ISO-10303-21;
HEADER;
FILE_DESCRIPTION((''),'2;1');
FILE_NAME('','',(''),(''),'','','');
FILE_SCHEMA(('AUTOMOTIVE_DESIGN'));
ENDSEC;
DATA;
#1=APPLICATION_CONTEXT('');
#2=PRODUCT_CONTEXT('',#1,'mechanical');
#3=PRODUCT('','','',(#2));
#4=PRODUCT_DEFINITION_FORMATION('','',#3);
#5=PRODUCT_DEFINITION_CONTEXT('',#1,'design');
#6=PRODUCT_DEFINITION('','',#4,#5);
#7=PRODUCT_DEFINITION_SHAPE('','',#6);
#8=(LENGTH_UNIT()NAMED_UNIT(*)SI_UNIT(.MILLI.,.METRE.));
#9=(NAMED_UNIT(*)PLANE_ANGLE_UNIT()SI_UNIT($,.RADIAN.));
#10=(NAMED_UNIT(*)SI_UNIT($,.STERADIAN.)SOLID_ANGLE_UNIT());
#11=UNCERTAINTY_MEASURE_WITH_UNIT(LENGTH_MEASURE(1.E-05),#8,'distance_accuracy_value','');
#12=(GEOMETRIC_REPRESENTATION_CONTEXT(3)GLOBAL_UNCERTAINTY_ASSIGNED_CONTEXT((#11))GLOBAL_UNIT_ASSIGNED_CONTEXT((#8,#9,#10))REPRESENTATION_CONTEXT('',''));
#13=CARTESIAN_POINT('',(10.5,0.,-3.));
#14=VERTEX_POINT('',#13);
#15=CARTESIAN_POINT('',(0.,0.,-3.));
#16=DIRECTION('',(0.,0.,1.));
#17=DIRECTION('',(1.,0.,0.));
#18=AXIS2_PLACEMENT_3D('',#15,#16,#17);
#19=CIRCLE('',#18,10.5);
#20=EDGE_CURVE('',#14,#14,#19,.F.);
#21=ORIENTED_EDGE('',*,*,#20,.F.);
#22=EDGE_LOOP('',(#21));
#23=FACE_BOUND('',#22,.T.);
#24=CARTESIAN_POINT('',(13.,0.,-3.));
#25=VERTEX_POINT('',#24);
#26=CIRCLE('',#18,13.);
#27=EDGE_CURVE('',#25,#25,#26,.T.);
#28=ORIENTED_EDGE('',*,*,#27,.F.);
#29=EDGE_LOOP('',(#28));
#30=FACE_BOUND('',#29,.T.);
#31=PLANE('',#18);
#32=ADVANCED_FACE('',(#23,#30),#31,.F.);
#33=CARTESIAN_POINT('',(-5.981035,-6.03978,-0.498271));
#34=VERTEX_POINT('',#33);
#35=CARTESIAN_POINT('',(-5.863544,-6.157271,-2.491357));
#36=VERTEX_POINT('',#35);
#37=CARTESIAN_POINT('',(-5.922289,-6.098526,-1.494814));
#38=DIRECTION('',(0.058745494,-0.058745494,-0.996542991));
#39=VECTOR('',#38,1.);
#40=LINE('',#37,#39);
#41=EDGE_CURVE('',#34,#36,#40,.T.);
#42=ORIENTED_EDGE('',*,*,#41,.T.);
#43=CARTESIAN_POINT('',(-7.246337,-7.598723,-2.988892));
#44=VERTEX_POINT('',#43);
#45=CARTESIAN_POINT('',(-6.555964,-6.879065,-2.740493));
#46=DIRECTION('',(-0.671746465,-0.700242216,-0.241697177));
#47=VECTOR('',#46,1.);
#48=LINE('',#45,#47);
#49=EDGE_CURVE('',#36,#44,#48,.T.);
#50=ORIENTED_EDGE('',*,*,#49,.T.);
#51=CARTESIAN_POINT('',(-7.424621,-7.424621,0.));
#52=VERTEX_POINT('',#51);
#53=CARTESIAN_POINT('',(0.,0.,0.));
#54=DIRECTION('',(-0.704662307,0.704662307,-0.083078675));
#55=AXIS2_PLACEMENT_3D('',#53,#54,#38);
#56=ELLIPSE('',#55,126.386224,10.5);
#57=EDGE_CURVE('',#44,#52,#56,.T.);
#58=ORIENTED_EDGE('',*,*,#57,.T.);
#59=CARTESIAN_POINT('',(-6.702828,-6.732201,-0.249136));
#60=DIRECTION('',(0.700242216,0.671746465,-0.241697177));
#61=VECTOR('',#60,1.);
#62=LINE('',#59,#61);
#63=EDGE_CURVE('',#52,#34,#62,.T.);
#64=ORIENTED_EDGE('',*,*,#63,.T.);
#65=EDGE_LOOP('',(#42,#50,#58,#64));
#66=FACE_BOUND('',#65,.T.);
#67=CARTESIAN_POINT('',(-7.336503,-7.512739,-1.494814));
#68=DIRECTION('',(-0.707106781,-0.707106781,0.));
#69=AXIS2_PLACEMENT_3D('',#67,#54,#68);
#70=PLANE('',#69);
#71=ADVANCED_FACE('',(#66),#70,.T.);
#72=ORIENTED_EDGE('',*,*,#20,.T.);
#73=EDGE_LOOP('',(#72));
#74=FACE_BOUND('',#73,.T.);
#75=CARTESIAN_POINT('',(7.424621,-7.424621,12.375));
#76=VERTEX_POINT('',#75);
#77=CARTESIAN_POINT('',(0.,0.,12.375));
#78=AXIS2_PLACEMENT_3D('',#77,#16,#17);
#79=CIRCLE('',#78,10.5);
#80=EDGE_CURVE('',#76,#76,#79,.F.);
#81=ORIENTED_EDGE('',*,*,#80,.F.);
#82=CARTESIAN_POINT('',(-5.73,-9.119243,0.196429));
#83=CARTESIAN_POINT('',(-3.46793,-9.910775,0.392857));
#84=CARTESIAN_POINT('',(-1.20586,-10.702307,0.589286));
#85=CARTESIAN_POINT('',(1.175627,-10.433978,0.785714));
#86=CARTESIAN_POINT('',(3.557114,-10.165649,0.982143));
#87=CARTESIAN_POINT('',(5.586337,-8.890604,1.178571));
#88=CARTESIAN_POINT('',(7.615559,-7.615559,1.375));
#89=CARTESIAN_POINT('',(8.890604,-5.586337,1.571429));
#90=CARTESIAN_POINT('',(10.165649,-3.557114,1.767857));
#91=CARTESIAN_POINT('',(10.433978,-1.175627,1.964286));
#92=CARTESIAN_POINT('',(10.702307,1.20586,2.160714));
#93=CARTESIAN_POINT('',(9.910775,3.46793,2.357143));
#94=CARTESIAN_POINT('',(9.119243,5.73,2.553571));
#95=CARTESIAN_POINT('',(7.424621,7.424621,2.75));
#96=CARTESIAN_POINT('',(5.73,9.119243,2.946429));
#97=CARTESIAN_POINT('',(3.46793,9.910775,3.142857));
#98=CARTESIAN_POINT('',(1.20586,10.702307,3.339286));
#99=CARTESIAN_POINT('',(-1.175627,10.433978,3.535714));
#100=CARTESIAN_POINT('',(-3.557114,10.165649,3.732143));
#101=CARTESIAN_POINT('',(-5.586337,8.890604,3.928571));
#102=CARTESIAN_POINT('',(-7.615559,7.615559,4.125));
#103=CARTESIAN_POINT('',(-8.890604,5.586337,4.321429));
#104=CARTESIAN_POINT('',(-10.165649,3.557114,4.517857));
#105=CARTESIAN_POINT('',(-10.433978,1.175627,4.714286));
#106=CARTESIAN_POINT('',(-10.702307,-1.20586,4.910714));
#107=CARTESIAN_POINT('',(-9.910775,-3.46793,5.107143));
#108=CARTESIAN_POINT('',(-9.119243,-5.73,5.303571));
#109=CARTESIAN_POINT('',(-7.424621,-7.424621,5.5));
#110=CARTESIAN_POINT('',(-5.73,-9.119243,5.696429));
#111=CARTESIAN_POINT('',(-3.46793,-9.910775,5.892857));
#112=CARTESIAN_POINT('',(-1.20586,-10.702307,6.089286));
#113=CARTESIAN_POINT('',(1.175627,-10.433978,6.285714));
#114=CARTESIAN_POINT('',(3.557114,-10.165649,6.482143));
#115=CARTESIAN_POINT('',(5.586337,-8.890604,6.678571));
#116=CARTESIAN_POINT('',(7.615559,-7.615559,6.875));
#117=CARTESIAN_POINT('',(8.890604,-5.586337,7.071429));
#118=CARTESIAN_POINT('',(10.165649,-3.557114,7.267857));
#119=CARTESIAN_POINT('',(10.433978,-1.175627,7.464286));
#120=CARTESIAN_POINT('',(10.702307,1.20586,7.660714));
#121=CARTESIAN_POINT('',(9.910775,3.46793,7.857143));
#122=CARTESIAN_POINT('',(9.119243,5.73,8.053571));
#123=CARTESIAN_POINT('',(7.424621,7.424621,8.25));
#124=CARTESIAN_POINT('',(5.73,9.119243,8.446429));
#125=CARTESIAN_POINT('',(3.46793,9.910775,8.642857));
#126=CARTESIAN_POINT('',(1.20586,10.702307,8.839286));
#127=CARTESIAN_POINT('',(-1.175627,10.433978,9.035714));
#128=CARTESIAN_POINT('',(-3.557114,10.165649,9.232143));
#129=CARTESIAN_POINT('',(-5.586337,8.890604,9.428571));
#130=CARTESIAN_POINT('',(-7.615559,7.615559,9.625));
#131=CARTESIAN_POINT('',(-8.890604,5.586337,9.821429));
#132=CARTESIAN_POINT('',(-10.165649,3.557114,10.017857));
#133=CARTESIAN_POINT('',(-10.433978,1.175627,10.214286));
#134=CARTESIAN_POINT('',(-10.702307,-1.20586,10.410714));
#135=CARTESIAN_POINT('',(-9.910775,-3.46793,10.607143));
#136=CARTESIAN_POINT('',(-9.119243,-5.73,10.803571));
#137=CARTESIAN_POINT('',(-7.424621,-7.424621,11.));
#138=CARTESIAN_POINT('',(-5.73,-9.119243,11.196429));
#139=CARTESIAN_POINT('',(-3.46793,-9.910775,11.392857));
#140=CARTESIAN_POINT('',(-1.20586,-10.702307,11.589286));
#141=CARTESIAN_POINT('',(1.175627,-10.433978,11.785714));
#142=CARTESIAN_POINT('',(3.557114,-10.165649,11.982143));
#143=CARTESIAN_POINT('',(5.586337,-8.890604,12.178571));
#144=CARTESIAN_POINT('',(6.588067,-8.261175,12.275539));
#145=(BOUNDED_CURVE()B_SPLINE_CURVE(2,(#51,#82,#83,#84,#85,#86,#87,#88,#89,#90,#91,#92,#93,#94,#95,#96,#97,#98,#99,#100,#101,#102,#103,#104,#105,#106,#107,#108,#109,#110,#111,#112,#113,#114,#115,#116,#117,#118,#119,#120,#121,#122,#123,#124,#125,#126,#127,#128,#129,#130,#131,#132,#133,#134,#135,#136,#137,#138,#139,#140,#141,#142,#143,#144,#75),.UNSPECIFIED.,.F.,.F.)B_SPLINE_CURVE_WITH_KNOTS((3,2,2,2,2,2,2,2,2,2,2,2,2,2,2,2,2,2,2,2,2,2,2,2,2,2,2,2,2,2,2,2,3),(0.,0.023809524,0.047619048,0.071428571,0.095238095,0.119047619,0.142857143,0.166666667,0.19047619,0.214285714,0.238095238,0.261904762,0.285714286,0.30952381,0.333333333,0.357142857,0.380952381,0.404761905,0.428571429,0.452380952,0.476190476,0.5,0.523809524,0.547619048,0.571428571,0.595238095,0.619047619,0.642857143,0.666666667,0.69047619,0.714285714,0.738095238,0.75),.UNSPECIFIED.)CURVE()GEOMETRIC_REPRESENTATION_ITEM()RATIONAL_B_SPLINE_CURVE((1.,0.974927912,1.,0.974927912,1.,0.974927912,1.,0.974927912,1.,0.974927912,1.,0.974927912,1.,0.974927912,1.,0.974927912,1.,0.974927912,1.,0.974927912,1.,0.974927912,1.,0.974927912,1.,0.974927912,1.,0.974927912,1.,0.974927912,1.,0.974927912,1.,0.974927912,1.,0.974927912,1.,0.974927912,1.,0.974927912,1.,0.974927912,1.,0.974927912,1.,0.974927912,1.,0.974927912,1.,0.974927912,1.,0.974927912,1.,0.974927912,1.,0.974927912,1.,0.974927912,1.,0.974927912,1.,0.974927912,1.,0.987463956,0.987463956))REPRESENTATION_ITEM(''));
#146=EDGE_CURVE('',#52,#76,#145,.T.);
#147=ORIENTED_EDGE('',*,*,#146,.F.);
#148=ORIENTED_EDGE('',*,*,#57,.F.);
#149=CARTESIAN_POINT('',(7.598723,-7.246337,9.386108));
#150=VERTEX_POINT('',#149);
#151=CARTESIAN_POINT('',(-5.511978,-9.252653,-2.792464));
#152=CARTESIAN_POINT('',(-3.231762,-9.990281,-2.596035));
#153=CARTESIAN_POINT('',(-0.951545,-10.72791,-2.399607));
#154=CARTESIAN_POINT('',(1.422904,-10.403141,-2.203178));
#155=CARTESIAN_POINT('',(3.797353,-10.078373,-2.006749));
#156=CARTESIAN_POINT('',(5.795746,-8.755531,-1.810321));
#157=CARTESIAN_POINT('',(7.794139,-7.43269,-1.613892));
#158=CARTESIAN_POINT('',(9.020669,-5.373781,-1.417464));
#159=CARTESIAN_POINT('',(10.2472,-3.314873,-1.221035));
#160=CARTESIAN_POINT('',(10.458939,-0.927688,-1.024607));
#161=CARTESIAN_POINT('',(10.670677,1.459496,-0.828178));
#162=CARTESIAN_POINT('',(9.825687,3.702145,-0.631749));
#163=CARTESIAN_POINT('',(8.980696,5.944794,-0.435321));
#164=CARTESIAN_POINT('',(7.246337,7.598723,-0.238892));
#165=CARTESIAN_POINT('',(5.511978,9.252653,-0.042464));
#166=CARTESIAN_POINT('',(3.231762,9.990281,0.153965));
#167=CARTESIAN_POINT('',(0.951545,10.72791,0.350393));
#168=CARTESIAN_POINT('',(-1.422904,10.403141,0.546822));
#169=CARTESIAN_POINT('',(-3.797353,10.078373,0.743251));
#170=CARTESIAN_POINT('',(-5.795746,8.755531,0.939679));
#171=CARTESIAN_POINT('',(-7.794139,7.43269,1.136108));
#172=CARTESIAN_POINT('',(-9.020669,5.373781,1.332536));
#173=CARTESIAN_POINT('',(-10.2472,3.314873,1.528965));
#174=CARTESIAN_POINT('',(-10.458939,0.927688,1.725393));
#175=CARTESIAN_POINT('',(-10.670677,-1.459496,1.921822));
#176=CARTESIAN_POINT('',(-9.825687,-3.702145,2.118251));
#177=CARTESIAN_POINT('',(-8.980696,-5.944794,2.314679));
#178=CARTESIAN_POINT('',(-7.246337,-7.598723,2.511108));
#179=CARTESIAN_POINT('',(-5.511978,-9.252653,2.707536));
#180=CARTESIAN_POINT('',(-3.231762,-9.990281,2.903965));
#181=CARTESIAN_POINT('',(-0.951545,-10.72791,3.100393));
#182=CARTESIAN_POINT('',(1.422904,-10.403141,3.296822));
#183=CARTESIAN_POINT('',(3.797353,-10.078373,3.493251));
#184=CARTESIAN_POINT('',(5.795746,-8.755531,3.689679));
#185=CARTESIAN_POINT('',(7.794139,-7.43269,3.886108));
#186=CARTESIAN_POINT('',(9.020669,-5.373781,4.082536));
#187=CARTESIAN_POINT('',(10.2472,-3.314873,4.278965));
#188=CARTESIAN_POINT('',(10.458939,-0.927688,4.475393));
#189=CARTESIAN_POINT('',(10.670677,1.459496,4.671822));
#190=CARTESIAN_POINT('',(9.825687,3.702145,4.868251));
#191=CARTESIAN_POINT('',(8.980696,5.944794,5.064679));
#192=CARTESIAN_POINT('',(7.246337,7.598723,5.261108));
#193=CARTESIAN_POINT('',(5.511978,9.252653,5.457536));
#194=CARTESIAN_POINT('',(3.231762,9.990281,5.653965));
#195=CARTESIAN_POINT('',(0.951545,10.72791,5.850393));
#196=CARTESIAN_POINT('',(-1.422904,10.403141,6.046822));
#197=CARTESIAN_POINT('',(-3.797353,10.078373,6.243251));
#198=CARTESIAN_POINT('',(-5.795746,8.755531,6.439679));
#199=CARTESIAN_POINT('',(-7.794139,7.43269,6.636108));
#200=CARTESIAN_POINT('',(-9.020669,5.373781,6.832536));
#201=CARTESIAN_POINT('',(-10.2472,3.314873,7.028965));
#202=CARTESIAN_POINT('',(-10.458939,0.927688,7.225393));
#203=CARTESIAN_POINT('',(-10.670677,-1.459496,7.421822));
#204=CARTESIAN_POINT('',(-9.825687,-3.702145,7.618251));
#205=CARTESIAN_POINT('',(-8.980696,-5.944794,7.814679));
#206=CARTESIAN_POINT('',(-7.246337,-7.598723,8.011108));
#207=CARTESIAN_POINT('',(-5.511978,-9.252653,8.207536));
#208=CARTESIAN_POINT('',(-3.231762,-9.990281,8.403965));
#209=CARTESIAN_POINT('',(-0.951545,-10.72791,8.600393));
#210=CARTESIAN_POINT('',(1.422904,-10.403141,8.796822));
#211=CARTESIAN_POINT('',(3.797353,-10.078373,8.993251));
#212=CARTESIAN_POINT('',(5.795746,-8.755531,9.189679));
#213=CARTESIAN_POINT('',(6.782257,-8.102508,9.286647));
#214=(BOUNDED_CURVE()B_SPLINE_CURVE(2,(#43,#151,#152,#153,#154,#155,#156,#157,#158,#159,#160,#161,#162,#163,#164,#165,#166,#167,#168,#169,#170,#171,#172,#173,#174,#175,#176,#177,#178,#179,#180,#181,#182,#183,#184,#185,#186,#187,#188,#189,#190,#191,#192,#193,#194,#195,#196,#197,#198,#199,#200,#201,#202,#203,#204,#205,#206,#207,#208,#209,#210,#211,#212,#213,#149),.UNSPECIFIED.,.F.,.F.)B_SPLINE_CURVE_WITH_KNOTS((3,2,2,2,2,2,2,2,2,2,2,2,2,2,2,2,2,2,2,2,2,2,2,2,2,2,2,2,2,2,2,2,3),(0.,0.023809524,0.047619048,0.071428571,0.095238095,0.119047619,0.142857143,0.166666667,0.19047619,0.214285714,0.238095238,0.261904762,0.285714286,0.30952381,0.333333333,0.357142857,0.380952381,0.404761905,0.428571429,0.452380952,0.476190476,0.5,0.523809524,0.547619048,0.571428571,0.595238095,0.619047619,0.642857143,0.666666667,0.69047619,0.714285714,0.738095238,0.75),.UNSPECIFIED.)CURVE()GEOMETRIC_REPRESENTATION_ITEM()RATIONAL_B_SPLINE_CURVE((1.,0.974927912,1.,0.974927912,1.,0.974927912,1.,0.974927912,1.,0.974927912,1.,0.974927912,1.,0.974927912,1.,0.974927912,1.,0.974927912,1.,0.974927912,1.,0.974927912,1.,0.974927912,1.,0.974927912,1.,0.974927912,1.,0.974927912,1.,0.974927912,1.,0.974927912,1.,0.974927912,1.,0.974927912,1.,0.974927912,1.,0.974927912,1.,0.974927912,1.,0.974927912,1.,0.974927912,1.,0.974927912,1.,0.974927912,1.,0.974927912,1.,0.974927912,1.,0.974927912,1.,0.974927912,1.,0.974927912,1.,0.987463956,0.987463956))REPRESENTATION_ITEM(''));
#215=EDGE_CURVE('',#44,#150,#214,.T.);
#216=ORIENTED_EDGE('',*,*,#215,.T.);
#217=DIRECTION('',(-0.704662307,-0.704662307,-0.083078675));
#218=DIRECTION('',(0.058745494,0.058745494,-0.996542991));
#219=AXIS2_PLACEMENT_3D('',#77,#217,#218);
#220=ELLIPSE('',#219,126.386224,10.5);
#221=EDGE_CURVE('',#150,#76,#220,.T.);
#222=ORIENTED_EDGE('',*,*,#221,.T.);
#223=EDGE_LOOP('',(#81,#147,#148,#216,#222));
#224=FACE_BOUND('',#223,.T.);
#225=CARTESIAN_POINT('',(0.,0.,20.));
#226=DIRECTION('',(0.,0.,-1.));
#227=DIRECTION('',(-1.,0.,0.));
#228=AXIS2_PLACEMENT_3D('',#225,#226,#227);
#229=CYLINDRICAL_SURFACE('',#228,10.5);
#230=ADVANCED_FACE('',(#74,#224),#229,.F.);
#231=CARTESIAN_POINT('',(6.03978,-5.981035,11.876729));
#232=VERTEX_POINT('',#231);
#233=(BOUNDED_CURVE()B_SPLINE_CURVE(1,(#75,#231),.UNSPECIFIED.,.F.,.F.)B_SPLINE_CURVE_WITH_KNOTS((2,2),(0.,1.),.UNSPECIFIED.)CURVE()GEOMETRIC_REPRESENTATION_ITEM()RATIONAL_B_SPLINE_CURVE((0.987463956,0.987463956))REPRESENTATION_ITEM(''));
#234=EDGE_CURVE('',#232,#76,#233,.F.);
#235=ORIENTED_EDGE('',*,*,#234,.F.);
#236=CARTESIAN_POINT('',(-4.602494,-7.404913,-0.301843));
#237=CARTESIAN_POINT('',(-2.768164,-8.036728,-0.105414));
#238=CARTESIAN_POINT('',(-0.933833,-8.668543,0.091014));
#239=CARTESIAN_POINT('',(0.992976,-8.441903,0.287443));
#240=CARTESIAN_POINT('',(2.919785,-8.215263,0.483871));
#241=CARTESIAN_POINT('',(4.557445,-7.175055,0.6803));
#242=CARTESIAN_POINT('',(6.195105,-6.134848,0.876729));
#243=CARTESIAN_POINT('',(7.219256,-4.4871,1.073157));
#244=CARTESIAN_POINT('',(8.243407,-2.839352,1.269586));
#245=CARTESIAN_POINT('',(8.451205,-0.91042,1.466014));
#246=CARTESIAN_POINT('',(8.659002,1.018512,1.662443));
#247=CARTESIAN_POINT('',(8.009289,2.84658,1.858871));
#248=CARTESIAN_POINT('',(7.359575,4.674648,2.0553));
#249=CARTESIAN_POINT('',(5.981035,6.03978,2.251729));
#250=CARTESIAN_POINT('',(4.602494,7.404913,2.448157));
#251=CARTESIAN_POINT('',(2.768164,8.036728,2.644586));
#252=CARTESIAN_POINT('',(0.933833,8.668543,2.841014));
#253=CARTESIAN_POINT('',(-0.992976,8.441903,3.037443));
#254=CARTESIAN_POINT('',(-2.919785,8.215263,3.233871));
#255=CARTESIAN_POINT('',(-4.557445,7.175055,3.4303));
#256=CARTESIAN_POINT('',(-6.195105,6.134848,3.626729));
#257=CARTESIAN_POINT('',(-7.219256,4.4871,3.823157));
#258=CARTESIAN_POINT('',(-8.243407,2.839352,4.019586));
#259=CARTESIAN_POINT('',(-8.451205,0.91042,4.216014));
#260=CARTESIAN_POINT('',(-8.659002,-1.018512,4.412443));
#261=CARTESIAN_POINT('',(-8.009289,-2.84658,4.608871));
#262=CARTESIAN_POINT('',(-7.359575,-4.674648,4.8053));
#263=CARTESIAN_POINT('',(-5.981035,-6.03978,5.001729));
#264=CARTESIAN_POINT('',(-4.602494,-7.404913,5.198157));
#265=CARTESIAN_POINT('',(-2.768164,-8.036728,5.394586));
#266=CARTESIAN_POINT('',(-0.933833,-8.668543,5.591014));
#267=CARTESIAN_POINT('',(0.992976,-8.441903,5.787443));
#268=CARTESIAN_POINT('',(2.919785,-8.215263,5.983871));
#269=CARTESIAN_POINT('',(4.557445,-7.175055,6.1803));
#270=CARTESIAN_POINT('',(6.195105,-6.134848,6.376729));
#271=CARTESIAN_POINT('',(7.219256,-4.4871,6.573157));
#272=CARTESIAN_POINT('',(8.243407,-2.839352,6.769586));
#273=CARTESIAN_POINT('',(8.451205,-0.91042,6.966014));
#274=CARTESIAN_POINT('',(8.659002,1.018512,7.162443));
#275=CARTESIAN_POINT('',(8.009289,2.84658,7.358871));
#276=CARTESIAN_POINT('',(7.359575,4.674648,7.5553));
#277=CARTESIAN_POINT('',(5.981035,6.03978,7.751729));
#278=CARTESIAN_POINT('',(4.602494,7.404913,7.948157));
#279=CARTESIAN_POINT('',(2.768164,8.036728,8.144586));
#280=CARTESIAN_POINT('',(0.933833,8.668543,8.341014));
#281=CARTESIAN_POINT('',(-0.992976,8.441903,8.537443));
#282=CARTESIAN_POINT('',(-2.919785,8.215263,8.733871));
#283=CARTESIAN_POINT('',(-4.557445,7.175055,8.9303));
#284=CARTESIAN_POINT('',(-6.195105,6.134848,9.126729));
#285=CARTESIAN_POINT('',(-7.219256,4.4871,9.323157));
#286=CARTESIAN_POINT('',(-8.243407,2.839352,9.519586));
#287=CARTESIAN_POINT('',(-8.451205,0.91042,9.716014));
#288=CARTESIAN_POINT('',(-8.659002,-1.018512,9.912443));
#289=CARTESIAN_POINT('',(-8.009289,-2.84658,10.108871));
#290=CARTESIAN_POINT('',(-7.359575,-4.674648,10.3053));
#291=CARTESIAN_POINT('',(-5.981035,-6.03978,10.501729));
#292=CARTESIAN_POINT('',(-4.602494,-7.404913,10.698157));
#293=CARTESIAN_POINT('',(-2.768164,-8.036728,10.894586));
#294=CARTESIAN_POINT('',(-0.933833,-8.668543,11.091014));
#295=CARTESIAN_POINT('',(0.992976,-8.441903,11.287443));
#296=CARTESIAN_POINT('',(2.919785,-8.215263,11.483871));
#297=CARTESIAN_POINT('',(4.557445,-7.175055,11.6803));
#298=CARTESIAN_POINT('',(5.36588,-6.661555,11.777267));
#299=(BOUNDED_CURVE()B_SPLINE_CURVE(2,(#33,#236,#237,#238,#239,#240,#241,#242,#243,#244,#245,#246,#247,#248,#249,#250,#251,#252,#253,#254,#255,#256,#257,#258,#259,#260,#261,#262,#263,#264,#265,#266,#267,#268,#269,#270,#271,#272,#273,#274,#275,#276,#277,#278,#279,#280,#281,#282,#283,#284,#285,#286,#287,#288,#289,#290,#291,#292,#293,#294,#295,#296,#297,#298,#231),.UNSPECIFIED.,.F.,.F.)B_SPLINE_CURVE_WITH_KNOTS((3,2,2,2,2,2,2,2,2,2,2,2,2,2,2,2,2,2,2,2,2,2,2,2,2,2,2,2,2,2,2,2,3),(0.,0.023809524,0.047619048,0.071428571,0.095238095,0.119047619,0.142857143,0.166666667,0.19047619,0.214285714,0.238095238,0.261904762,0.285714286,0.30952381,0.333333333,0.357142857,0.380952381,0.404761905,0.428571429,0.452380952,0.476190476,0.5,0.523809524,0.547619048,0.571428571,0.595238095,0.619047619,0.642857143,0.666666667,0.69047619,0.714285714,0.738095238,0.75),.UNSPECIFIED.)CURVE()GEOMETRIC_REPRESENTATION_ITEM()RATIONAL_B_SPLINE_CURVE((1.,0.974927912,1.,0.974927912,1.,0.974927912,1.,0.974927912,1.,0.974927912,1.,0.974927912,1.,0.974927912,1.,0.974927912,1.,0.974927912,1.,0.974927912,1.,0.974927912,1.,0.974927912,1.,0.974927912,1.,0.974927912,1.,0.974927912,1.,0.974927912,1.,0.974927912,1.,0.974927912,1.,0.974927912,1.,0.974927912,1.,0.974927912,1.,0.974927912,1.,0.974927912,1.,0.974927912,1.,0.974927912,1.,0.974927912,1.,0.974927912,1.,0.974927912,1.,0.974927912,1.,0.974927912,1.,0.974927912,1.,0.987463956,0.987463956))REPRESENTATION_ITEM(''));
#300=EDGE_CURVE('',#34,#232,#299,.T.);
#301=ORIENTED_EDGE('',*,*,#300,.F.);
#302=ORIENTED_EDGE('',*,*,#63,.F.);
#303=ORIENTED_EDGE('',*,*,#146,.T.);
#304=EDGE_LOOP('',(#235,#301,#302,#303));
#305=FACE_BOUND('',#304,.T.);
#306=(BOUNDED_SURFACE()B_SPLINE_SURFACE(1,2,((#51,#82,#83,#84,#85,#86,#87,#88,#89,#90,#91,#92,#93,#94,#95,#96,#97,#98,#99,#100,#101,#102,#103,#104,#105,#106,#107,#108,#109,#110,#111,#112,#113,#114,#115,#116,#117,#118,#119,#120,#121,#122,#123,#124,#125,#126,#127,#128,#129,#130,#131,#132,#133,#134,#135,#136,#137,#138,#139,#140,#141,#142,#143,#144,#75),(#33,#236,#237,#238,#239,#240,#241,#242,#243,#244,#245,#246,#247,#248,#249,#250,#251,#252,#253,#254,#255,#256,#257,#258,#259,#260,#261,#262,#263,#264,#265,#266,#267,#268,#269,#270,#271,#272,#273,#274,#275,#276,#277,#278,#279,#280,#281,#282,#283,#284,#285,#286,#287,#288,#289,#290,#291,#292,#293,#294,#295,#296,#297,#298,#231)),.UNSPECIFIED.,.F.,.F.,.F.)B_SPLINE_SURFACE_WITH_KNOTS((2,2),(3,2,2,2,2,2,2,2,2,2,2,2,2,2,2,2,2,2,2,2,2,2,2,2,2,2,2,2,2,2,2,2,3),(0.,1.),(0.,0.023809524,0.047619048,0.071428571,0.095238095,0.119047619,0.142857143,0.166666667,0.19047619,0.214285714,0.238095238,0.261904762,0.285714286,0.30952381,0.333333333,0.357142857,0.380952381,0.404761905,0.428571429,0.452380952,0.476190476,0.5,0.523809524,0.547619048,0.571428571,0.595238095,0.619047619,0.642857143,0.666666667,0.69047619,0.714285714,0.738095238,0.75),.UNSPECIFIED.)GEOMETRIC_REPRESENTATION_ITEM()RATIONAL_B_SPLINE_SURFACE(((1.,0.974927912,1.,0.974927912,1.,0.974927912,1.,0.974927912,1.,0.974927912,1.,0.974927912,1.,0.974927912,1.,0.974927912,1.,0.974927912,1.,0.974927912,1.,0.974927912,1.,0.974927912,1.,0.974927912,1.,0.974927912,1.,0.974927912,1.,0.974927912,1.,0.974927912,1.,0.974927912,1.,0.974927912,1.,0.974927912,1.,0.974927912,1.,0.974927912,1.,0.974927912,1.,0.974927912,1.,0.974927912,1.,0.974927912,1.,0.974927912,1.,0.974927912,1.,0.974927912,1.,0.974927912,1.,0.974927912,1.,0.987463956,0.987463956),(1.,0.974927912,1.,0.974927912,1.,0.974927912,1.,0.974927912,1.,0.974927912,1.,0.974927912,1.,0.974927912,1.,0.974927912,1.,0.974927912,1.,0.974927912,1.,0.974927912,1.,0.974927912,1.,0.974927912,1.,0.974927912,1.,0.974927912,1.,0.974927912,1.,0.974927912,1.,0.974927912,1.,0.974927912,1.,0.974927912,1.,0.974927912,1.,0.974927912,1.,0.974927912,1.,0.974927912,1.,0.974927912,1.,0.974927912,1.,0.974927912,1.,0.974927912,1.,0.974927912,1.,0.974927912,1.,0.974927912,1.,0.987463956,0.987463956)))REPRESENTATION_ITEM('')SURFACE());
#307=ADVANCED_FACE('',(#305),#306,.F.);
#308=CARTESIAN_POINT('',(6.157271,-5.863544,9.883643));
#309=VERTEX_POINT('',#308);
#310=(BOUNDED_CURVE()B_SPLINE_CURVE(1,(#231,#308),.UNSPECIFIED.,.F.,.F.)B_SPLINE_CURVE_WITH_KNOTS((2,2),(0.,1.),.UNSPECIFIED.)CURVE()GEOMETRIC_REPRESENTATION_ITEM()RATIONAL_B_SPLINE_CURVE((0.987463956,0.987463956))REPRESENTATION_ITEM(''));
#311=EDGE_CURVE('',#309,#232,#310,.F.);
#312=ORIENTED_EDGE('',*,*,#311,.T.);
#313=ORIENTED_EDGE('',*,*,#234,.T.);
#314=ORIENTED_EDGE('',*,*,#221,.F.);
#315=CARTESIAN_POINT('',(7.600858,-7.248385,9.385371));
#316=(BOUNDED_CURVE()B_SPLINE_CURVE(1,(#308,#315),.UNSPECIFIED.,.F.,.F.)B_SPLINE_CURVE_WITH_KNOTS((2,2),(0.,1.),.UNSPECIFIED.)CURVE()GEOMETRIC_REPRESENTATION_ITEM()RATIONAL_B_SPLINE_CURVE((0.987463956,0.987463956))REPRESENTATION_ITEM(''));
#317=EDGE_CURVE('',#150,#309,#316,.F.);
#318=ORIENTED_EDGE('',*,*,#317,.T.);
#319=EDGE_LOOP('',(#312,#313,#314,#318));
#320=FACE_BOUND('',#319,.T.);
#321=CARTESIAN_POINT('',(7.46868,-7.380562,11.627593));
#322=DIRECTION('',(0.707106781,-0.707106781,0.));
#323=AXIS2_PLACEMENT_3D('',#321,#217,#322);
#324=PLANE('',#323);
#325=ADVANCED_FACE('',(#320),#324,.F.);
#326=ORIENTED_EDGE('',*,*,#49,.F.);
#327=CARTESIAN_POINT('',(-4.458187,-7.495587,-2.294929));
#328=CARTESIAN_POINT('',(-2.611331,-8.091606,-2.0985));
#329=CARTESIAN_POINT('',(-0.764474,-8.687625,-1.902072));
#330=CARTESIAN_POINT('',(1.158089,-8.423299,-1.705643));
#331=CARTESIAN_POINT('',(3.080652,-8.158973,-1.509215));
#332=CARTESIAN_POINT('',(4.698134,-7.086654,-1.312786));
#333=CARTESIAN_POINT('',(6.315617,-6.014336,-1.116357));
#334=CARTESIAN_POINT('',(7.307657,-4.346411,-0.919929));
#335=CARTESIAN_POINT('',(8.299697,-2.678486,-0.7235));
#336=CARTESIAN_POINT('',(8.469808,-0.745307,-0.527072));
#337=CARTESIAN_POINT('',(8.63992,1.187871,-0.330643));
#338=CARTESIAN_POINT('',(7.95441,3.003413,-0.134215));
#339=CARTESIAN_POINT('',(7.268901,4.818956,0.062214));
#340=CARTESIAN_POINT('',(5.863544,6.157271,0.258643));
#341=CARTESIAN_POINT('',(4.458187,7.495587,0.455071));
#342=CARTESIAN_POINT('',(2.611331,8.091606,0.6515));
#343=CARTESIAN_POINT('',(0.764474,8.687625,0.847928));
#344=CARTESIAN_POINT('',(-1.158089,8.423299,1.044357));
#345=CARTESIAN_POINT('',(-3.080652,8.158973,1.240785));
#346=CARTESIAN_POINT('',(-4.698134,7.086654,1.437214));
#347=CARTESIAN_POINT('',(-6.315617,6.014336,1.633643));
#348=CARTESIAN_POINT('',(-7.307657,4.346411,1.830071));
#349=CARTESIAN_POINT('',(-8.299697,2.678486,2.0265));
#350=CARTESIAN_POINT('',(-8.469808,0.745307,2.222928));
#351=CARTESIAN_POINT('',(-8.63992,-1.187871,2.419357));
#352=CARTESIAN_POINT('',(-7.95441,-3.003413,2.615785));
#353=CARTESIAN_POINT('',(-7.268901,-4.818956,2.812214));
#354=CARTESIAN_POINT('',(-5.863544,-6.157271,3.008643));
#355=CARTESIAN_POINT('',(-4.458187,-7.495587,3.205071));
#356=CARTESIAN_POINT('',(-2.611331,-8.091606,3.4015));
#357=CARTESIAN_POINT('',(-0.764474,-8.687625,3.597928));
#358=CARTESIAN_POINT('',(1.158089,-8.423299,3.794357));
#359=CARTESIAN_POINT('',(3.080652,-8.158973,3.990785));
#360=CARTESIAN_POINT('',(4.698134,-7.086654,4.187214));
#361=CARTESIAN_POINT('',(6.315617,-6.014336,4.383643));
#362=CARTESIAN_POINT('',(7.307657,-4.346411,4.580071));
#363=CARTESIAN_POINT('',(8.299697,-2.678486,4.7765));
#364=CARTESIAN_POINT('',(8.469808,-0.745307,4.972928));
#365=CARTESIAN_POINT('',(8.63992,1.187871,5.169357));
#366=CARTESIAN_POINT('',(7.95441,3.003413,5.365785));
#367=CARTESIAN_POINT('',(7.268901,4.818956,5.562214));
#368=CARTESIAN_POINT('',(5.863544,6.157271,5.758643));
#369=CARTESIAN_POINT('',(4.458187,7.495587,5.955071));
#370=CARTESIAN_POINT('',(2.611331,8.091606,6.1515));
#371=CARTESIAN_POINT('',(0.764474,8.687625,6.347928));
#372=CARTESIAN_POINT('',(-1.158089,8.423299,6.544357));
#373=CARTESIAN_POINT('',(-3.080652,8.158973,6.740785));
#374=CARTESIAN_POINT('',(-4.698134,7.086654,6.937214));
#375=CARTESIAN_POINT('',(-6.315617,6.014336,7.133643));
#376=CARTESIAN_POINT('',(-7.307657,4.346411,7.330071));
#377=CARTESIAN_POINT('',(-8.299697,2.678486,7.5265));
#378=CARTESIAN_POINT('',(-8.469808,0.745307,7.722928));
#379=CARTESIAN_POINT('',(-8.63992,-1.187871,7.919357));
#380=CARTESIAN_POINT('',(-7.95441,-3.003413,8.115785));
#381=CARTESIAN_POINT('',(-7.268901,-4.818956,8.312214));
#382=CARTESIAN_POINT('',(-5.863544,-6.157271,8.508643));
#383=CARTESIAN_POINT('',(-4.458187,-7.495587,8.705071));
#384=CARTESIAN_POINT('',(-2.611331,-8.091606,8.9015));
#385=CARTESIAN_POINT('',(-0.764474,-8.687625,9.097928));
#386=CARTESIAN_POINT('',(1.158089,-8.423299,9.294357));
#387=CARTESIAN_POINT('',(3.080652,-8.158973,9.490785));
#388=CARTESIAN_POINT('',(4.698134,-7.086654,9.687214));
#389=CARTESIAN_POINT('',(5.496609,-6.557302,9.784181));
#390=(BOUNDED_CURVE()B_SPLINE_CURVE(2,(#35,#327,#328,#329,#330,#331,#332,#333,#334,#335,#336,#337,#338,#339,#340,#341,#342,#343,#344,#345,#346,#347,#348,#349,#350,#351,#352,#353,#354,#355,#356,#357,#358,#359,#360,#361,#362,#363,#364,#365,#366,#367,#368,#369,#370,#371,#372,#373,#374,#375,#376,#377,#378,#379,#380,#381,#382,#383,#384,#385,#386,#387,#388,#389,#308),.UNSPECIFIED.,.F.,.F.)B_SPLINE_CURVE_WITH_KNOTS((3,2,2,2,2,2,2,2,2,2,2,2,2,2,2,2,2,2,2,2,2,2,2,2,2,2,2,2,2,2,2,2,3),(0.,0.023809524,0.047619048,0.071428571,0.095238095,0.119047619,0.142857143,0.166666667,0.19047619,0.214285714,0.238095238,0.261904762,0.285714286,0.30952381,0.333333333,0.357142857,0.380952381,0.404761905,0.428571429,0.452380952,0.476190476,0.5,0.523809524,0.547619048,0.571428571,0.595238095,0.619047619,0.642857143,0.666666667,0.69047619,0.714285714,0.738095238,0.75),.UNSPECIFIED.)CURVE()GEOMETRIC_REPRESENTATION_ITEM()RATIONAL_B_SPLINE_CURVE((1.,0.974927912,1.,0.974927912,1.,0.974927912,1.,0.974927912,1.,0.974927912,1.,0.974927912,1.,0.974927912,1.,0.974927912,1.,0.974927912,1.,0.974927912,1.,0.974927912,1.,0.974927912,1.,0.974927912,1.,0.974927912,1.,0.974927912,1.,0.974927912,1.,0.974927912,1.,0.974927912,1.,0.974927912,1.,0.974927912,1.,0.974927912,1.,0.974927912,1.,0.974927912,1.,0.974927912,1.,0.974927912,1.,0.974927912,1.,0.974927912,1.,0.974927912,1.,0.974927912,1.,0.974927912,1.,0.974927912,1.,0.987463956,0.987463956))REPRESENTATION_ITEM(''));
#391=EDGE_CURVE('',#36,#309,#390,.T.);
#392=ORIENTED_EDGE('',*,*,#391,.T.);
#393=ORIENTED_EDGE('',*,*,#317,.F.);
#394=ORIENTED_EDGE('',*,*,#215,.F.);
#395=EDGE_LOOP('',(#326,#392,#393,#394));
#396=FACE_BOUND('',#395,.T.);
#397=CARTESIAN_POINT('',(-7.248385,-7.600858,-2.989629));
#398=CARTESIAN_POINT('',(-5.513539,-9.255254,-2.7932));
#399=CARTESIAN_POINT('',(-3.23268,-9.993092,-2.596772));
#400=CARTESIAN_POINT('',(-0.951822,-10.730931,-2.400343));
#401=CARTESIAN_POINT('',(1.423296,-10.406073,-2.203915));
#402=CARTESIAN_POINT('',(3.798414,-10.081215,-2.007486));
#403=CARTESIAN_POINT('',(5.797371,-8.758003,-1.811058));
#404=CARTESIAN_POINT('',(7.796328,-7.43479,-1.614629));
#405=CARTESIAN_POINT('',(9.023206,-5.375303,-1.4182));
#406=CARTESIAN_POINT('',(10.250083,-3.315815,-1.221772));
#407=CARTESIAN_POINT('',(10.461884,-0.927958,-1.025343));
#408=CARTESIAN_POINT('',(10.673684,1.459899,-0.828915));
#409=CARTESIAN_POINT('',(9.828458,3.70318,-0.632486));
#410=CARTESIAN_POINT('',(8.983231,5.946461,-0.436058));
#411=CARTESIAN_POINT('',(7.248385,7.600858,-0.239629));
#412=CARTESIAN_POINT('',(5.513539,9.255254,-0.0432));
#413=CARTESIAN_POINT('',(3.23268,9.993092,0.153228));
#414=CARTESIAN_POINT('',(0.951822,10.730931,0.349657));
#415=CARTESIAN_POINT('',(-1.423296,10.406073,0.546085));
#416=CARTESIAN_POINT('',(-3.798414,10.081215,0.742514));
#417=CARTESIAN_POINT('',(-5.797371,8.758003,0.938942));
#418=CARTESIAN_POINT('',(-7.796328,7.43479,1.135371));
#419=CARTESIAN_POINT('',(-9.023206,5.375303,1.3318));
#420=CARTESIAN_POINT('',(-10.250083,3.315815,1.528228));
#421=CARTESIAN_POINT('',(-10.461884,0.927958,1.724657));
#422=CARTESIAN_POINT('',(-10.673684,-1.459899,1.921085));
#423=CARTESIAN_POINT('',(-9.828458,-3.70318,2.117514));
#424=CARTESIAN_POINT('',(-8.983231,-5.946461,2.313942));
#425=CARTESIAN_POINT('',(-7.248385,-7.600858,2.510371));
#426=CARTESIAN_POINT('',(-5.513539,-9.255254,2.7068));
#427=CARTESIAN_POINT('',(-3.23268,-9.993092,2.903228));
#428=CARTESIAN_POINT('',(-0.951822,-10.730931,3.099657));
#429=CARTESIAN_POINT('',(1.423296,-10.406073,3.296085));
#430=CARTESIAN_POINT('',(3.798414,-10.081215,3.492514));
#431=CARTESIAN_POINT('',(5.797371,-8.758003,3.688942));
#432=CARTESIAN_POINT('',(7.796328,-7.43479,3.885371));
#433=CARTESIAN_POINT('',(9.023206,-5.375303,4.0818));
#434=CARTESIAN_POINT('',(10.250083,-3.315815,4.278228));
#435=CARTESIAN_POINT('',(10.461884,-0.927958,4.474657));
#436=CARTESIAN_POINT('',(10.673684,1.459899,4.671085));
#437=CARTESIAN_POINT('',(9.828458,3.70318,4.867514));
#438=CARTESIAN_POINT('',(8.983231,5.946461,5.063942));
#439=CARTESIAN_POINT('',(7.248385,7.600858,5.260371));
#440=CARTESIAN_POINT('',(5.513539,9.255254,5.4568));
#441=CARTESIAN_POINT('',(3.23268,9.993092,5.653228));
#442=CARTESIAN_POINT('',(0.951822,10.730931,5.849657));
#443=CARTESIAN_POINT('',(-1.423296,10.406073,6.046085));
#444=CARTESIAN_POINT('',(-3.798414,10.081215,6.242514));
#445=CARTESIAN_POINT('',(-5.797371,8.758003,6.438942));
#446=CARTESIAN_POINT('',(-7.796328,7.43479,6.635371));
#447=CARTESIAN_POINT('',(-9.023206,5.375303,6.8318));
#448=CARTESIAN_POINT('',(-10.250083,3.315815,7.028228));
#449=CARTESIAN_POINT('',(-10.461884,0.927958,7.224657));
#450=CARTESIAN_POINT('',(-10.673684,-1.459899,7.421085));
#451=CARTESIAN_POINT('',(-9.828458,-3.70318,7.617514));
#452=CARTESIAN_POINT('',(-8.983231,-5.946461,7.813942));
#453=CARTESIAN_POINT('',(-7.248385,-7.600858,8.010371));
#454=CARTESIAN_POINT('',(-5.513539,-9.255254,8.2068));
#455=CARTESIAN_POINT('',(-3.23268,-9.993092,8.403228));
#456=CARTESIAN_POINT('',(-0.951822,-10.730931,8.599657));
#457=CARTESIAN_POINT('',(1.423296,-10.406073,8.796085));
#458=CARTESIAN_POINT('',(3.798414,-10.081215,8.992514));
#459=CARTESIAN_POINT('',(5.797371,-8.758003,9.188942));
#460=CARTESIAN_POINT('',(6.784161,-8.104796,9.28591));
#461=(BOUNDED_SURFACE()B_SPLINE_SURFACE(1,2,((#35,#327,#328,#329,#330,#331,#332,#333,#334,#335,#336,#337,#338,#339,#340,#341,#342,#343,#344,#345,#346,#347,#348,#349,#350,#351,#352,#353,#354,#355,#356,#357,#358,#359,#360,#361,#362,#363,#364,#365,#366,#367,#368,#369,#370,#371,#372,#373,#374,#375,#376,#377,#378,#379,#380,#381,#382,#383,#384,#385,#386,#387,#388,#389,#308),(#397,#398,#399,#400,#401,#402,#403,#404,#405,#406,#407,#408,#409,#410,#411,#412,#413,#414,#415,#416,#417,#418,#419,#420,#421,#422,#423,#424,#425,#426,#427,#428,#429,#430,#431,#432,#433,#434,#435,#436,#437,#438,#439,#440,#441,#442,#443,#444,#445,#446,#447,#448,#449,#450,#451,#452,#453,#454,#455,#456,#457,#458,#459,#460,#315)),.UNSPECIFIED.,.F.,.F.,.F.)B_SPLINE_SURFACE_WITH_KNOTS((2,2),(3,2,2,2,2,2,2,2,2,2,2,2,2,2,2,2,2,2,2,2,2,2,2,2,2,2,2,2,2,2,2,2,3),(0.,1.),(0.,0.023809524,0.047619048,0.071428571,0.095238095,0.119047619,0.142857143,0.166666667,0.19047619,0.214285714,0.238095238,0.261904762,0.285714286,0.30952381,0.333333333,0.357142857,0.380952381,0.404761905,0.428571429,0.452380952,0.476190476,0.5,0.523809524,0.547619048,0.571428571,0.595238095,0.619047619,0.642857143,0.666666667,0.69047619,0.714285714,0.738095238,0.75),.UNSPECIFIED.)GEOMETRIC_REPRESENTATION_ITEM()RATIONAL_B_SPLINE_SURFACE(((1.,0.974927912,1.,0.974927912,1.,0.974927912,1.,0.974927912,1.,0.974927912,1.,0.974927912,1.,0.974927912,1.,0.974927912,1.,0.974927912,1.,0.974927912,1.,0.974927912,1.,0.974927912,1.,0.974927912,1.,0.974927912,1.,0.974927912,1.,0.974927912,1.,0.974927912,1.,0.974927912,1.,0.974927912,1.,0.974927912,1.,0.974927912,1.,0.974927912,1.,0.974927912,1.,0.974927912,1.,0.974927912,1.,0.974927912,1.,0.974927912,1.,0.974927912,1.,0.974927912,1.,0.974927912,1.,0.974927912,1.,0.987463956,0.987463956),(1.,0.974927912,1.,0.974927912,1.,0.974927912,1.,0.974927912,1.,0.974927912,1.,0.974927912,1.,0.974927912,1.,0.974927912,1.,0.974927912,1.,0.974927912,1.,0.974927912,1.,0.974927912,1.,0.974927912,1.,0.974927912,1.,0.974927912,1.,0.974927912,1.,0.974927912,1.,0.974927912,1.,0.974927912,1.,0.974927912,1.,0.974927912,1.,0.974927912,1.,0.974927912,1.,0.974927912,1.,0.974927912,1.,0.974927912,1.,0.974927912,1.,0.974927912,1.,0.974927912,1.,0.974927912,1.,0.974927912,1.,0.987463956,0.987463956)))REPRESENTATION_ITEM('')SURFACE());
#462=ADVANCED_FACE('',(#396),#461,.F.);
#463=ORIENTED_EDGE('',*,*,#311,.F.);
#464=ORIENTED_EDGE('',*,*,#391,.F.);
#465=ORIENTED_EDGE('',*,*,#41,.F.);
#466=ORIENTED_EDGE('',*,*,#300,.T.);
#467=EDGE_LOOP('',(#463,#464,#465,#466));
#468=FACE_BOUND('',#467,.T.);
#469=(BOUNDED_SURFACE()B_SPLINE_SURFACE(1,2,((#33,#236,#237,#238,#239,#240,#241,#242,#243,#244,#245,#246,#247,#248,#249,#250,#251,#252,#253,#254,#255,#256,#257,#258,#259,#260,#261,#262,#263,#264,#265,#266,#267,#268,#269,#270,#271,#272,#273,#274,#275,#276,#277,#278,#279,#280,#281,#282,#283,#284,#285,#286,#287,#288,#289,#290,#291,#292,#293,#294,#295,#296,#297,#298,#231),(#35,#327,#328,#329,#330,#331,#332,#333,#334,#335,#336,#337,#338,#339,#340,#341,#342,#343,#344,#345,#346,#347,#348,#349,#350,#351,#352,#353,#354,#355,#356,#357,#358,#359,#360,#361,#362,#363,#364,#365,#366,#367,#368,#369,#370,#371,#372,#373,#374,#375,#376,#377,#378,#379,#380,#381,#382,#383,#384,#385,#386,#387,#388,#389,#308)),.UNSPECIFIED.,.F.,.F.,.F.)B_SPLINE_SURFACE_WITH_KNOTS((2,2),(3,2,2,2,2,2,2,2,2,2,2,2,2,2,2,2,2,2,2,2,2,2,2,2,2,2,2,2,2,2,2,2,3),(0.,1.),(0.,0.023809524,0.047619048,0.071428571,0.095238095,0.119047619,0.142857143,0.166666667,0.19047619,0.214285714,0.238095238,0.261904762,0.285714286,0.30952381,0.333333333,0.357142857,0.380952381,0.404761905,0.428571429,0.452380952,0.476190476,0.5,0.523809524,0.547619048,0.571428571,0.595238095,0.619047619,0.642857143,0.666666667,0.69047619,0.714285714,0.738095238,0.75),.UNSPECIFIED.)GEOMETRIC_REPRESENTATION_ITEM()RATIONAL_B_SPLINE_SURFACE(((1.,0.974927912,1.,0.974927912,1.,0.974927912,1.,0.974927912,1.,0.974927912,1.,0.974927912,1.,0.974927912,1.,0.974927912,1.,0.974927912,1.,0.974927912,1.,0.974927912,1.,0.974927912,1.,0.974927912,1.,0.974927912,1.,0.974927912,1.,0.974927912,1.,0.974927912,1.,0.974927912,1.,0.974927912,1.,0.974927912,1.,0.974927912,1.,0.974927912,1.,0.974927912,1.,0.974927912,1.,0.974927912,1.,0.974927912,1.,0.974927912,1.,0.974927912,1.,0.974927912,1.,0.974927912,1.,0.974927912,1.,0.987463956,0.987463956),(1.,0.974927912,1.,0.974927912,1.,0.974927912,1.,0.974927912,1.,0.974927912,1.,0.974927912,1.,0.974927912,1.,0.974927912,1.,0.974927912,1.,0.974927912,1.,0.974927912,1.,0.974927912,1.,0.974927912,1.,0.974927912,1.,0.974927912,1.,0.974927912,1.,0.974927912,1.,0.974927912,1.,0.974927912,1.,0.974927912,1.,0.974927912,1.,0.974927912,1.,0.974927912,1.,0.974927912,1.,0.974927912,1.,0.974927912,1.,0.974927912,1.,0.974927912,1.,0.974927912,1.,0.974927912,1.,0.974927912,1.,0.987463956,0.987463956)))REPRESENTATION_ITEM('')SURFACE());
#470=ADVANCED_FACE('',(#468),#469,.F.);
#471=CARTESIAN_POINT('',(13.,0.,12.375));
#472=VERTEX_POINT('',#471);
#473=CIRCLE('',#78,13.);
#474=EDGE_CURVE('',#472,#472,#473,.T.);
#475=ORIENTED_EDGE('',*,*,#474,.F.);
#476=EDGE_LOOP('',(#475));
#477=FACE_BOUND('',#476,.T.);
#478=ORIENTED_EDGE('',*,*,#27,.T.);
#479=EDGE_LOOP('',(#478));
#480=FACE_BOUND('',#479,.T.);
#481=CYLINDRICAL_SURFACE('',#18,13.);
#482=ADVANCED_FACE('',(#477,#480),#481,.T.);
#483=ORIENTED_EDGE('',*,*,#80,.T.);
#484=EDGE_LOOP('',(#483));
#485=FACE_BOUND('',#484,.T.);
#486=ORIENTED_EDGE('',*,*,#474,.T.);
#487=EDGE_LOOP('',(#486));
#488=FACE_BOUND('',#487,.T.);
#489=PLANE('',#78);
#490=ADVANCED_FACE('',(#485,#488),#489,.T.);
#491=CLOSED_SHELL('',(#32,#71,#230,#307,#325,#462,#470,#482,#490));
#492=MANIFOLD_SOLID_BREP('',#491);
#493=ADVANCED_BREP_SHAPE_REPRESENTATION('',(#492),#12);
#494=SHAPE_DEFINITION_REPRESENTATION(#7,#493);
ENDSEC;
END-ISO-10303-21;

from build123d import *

# Parameters (mm, degrees)
EXTRUDE_1_DEPTH          = 12.375
EXTRUDE_1_DEPTH_BACK     = 3
SKETCH_1_R               = 13
CUT_EXTRUDE_1_DEPTH      = 20
CUT_EXTRUDE_1_DEPTH_BACK = 10
SKETCH_2_R               = 10.5
SWEEP_1_PITCH            = 5.5


with BuildPart() as part:
    # 草图1 → 凸台-拉伸1 (new, two sides: drawn at the far end of the back side and taken through both)
    with BuildSketch(Plane.XY.offset(-EXTRUDE_1_DEPTH_BACK)):
        Circle(SKETCH_1_R)
    extrude(amount=EXTRUDE_1_DEPTH + EXTRUDE_1_DEPTH_BACK)

    # 草图2 → 切除-拉伸1 (cut, two sides: drawn at the far end of the back side and taken through both)
    with BuildSketch(Plane.XY.offset(-CUT_EXTRUDE_1_DEPTH_BACK)):
        Circle(SKETCH_2_R)
    extrude(amount=CUT_EXTRUDE_1_DEPTH + CUT_EXTRUDE_1_DEPTH_BACK, mode=Mode.SUBTRACT)

    # 扫描1: the profile of 草图4 screwed along a right-hand helix of 2.25 turns, 14 arcs to a turn; built about Z, then put on its axis
    sweep_1_z = Axis((0, 0, 0), (0, 0, 1))
    sweep_1_corners = [(10.5, 0, 0), (10.5, 0.249236025, -2.989628974), (8.5, 0.207696687, -2.491357479), (8.5, 0.041539337, -0.498271496)]
    with BuildLine(mode=Mode.PRIVATE) as sweep_1_profile:
        Line(sweep_1_corners[0], sweep_1_corners[1])
        Line(sweep_1_corners[1], sweep_1_corners[2])
        Line(sweep_1_corners[2], sweep_1_corners[3])
        Line(sweep_1_corners[3], sweep_1_corners[0])
    sweep_1_cap = Face(sweep_1_profile.wire())
    sweep_1_turn_angles = [0, 12.857142857, 25.714285714, 38.571428571, 51.428571429, 64.285714286, 77.142857143, 90, 102.857142857, 115.714285714, 128.571428571, 141.428571429, 154.285714286, 167.142857143, 180, 192.857142857, 205.714285714, 218.571428571, 231.428571429, 244.285714286, 257.142857143, 270, 282.857142857, 295.714285714, 308.571428571, 321.428571429, 334.285714286, 347.142857143, 360]
    sweep_1_turn_weights = [1, 0.9749279121818236, 1, 0.9749279121818236, 1, 0.9749279121818236, 1, 0.9749279121818236, 1, 0.9749279121818236, 1, 0.9749279121818236, 1, 0.9749279121818236, 1, 0.9749279121818236, 1, 0.9749279121818236, 1, 0.9749279121818236, 1, 0.9749279121818236, 1, 0.9749279121818237, 1, 0.9749279121818236, 1, 0.9749279121818236, 1]
    sweep_1_turn_rails = [Edge.make_bspline([Vector(p[0], p[1], 0).rotate(sweep_1_z, sweep_1_turn_angles[k]) / sweep_1_turn_weights[k] + Vector(0, 0, p[2] + SWEEP_1_PITCH * sweep_1_turn_angles[k] / 360) for k in range(29)], [0, 0, 0, 1, 1, 2, 2, 3, 3, 4, 4, 5, 5, 6, 6, 7, 7, 8, 8, 9, 9, 10, 10, 11, 11, 12, 12, 13, 13, 14, 14, 14], 2, sweep_1_turn_weights) for p in sweep_1_corners]
    sweep_1_turn_sides = [Face.make_surface_from_curves(sweep_1_turn_rails[p[0]], sweep_1_turn_rails[p[1]]) for p in [(0, 1), (1, 2), (2, 3), (3, 0)]]
    sweep_1_last_angles = [720, 732.857142857, 745.714285714, 758.571428571, 771.428571429, 784.285714286, 797.142857143, 803.571428571, 810]
    sweep_1_last_weights = [1, 0.9749279121818237, 1, 0.9749279121818235, 1, 0.9749279121818237, 1, 0.9937122098932412, 1]
    sweep_1_last_rails = [Edge.make_bspline([Vector(p[0], p[1], 0).rotate(sweep_1_z, sweep_1_last_angles[k]) / sweep_1_last_weights[k] + Vector(0, 0, p[2] + SWEEP_1_PITCH * sweep_1_last_angles[k] / 360) for k in range(9)], [0, 0, 0, 1, 1, 2, 2, 3, 3, 4, 4, 4], 2, sweep_1_last_weights) for p in sweep_1_corners]
    sweep_1_last_sides = [Face.make_surface_from_curves(sweep_1_last_rails[p[0]], sweep_1_last_rails[p[1]]) for p in [(0, 1), (1, 2), (2, 3), (3, 0)]]
    sweep_1 = Plane(origin=(0, 0, 0), x_dir=(-0.7071067811865414, -0.7071067811865537, 0), z_dir=(0, 0, 1)) * Solid(Shell([*[p.moved(Location((0, 0, SWEEP_1_PITCH * i))) for i in range(2) for p in sweep_1_turn_sides], *sweep_1_last_sides, sweep_1_cap, sweep_1_cap.rotate(sweep_1_z, 810).moved(Location((0, 0, SWEEP_1_PITCH * 810 / 360)))]))
    add(sweep_1)


solid = part.part
